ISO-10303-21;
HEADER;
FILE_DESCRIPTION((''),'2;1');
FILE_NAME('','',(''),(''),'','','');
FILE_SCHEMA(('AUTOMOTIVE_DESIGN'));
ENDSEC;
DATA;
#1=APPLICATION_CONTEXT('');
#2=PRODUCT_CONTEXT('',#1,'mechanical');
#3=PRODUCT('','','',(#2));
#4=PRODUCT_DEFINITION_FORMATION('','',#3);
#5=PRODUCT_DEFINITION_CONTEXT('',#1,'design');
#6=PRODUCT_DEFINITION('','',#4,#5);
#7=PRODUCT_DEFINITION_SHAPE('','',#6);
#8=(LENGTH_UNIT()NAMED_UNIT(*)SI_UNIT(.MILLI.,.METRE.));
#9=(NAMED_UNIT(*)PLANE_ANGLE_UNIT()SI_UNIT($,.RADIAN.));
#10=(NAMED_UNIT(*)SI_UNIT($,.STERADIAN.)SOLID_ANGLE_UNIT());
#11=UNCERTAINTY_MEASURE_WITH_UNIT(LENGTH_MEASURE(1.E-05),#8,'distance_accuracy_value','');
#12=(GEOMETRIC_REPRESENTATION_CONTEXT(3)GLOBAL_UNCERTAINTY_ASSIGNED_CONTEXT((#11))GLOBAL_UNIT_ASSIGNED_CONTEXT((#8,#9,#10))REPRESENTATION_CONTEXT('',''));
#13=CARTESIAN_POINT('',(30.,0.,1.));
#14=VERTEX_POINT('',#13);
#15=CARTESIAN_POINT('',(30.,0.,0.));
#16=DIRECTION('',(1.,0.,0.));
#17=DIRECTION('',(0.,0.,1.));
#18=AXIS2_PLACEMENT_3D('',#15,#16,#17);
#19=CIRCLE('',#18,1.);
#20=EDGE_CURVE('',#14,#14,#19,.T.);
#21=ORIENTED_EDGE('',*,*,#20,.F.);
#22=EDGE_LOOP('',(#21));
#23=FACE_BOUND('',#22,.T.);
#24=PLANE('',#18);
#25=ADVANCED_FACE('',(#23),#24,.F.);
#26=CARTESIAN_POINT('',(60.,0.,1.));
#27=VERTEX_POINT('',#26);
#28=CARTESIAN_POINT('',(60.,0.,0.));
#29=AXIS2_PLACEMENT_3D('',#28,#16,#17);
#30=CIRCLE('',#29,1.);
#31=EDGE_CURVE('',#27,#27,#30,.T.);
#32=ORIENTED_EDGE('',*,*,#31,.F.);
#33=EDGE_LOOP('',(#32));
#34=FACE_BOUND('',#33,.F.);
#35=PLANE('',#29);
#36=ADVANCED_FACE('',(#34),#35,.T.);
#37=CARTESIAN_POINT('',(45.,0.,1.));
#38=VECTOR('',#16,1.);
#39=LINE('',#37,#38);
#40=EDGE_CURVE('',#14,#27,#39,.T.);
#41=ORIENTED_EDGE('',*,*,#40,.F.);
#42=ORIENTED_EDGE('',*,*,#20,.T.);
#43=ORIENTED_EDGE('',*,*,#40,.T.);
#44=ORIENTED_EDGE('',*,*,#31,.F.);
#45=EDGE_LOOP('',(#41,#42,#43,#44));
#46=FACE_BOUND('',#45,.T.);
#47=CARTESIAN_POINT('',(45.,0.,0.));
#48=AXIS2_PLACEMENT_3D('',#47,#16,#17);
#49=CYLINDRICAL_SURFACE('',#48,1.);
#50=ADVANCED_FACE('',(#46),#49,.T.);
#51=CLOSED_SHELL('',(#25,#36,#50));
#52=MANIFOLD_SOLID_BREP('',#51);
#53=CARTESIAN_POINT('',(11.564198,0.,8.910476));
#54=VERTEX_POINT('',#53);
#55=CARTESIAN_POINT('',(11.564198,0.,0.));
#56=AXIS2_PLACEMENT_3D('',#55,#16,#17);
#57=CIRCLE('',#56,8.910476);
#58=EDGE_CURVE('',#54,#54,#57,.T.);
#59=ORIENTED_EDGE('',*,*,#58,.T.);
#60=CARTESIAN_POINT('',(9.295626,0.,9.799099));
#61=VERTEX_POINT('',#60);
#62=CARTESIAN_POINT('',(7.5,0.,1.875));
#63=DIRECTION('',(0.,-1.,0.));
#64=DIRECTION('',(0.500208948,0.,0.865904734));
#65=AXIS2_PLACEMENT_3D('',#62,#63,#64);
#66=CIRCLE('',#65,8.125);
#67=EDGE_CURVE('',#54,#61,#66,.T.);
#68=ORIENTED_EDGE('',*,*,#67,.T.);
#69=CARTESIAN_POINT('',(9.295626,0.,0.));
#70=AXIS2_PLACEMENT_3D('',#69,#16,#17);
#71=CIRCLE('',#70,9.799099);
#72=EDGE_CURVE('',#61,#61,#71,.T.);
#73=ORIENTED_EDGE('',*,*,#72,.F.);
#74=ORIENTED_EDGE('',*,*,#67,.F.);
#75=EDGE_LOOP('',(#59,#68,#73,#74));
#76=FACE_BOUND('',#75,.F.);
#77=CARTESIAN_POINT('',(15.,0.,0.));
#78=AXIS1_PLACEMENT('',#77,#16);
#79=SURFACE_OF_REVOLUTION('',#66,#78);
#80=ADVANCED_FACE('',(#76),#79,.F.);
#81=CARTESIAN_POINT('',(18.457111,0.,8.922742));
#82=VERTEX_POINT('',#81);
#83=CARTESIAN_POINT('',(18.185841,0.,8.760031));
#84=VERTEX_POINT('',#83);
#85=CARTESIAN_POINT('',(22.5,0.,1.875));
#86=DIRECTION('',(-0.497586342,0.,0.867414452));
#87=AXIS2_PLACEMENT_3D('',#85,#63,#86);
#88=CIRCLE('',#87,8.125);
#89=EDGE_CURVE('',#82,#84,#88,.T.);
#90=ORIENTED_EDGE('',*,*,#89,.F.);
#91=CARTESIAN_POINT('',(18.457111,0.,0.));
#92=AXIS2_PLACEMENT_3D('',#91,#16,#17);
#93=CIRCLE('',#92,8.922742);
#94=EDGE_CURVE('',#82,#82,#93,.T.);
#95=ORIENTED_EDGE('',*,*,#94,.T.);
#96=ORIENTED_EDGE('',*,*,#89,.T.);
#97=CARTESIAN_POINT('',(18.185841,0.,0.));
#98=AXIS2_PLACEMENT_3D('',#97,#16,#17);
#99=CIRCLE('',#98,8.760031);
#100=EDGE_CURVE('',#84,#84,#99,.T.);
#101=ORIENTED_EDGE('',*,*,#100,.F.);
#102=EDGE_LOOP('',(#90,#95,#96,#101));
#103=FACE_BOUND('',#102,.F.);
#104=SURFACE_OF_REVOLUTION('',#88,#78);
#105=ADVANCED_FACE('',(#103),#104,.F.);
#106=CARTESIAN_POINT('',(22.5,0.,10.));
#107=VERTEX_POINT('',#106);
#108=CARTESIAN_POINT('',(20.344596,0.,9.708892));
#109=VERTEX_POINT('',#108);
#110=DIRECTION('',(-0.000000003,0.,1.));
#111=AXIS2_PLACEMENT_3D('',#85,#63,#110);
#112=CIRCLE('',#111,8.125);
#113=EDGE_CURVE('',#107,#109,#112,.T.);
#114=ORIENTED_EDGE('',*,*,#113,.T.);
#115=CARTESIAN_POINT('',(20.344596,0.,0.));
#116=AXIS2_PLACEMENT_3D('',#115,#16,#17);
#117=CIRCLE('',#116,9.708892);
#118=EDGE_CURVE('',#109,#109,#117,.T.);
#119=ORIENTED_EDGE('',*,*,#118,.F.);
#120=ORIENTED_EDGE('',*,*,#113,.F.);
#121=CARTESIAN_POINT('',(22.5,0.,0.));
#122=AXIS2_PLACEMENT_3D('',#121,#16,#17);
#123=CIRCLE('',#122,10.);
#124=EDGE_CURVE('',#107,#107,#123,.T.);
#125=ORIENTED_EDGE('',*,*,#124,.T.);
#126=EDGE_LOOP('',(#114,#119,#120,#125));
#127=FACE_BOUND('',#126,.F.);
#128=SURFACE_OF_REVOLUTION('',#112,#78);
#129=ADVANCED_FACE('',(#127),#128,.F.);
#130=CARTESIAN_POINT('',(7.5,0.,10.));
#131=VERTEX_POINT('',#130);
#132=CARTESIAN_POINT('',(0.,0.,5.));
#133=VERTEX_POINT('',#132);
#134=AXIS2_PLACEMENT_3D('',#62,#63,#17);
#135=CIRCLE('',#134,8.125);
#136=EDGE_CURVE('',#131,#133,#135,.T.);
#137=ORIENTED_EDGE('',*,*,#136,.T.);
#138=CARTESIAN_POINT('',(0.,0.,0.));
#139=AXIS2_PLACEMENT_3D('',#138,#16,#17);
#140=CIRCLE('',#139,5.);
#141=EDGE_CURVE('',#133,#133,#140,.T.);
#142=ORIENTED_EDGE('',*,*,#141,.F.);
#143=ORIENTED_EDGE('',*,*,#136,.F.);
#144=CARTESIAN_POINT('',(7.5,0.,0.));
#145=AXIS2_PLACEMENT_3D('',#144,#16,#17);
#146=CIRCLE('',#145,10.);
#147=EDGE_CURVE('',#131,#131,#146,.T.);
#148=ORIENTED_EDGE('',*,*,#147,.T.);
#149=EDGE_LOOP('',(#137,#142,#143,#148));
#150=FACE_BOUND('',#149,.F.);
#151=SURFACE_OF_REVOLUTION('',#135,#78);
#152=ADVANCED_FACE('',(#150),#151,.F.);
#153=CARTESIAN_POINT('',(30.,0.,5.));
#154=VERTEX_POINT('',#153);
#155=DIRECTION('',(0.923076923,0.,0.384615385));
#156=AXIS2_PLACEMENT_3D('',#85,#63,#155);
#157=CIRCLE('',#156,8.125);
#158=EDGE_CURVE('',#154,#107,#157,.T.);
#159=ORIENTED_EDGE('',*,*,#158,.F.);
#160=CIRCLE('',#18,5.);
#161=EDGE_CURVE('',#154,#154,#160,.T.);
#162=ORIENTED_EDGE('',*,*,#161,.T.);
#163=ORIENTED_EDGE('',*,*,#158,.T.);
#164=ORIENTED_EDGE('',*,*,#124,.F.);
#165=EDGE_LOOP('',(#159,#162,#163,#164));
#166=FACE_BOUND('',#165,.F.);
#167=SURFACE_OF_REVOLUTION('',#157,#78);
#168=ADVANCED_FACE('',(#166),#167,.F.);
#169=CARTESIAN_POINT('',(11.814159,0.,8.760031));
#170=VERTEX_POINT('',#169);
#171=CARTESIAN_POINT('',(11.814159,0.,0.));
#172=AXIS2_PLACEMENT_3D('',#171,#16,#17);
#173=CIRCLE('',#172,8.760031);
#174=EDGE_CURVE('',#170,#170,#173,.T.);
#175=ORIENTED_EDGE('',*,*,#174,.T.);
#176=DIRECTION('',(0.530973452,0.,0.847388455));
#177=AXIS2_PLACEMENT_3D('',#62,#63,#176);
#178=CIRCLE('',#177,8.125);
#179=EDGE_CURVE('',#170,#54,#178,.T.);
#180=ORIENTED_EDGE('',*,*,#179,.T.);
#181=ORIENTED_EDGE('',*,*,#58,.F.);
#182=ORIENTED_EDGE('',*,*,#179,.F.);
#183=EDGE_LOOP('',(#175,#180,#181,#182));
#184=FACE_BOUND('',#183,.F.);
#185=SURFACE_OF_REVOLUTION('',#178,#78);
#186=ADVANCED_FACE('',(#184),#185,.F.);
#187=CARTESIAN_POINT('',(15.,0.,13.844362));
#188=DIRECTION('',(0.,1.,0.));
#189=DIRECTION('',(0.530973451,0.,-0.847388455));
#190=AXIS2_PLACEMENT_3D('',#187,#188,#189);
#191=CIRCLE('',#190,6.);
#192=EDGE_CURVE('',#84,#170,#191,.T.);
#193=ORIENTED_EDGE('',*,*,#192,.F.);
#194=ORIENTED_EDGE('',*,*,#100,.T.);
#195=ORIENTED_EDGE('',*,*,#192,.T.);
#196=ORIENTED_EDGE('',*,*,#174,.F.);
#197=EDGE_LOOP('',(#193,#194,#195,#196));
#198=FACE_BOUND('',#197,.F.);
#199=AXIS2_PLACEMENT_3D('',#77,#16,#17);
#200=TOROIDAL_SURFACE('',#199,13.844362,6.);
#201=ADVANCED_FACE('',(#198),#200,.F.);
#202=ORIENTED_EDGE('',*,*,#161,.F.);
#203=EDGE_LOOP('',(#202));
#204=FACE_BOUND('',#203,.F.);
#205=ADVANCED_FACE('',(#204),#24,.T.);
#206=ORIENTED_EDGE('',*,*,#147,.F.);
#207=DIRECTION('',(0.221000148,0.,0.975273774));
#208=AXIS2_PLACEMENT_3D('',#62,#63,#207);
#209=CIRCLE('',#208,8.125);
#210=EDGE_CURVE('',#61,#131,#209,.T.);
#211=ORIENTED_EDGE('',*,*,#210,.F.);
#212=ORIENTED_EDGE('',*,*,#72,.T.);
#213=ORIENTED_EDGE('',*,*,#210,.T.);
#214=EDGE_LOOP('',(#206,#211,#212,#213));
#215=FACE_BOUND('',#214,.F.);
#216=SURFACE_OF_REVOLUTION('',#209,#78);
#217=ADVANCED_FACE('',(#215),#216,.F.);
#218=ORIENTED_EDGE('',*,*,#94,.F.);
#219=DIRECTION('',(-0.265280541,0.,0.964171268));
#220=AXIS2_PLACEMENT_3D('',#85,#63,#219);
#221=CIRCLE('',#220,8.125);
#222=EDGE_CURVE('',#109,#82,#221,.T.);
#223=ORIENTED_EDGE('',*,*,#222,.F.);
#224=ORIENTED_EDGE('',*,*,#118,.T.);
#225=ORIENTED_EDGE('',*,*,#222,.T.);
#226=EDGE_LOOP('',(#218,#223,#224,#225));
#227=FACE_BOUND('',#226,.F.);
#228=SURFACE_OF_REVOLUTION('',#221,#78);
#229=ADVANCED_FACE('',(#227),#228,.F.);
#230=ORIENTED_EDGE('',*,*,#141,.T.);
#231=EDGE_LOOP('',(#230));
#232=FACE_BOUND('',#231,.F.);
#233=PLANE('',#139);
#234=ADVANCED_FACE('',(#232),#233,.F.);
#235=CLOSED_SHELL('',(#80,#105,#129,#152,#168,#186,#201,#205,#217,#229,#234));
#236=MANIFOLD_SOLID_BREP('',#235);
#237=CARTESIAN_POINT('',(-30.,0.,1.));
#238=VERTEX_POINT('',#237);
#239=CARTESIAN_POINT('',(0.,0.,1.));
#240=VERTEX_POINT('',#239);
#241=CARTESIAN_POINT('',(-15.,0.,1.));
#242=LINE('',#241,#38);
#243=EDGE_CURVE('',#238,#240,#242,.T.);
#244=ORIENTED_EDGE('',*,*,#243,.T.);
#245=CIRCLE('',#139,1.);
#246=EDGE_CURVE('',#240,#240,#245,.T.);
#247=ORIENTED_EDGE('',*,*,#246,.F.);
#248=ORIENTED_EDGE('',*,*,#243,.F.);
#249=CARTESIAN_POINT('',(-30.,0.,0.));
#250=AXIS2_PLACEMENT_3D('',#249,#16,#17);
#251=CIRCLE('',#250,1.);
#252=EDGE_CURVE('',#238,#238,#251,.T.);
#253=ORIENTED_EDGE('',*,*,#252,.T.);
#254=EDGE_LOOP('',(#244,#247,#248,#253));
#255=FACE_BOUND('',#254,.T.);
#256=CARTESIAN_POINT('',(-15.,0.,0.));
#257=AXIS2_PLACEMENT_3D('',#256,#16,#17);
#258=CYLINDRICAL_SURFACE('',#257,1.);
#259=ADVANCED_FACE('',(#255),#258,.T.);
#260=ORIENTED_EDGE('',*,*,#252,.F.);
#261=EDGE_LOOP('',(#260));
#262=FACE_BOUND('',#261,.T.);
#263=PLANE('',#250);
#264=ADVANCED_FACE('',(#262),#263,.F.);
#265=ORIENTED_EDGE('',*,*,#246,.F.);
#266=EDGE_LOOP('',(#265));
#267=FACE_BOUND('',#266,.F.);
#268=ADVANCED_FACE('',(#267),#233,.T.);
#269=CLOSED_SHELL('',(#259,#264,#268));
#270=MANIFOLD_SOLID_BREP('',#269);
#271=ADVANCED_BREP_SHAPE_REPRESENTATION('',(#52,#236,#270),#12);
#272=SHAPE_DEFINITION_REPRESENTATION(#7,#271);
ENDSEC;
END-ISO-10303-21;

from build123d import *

# Parameters (mm, degrees)
F0_W = 30
F0_H = 1


# Not quite as in the source:
# - a feature names something its author has since deleted; it is built from what else it names
# - the program builds the solid bodies; features that only make, move or delete a surface that nothing else refers to are left out


with BuildPart() as f1:
    # F0 (on Front) → F1 (revolve)
    with BuildSketch(Plane.XZ):
        Polygon((0, 1), (0, 0), (30, 0), (30, 1), (30, 5), (0, 5), align=None)
        with BuildLine():
            ThreePointArc((7.5, 10), (2.9930609057, 8.6354086415), (0, 5))
            Line((0, 5), (30, 5))
            ThreePointArc((30, 5), (27.0069390843, 8.6354086482), (22.4999999759, 10))
            ThreePointArc((22.4999999759, 10), (21.4125129517, 9.9268939958), (20.3445956085, 9.7088915559))
            ThreePointArc((20.3445956085, 9.7088915559), (19.3760252959, 9.3754271244), (18.457110969, 8.9227424246))
            ThreePointArc((18.457110969, 8.9227424246), (18.3206839191, 8.8427070903), (18.185840708, 8.7600311984))
            ThreePointArc((18.185840708, 8.7600311984), (15, 7.8443619295), (11.814159292, 8.7600311984))
            ThreePointArc((11.814159292, 8.7600311984), (11.6898538017, 8.8363755911), (11.5641977003, 8.9104759649))
            ThreePointArc((11.5641977003, 8.9104759649), (10.4634096842, 9.4403042268), (9.2956262041, 9.7990994148))
            ThreePointArc((9.2956262041, 9.7990994148), (8.4034149808, 9.9496186518), (7.5, 10))
        make_face()
    revolve(axis=Axis((15, 0, 0), (1, 0, 0)))


with BuildPart() as f2:
    # F0 (on Front) → F2 (revolve)
    with BuildSketch(Plane.XZ):
        with Locations((-15, 0.5)):
            Rectangle(F0_W, F0_H)
    revolve(axis=Axis((15, 0, 0), (1, 0, 0)))


with BuildPart() as f2b:
    # F0 (on Front) → F2, piece 2 (revolve)
    with BuildSketch(Plane.XZ):
        with Locations((45, 0.5)):
            Rectangle(F0_W, F0_H)
    revolve(axis=Axis((15, 0, 0), (1, 0, 0)))


solid = Compound([f1.part, f2.part, f2b.part])
